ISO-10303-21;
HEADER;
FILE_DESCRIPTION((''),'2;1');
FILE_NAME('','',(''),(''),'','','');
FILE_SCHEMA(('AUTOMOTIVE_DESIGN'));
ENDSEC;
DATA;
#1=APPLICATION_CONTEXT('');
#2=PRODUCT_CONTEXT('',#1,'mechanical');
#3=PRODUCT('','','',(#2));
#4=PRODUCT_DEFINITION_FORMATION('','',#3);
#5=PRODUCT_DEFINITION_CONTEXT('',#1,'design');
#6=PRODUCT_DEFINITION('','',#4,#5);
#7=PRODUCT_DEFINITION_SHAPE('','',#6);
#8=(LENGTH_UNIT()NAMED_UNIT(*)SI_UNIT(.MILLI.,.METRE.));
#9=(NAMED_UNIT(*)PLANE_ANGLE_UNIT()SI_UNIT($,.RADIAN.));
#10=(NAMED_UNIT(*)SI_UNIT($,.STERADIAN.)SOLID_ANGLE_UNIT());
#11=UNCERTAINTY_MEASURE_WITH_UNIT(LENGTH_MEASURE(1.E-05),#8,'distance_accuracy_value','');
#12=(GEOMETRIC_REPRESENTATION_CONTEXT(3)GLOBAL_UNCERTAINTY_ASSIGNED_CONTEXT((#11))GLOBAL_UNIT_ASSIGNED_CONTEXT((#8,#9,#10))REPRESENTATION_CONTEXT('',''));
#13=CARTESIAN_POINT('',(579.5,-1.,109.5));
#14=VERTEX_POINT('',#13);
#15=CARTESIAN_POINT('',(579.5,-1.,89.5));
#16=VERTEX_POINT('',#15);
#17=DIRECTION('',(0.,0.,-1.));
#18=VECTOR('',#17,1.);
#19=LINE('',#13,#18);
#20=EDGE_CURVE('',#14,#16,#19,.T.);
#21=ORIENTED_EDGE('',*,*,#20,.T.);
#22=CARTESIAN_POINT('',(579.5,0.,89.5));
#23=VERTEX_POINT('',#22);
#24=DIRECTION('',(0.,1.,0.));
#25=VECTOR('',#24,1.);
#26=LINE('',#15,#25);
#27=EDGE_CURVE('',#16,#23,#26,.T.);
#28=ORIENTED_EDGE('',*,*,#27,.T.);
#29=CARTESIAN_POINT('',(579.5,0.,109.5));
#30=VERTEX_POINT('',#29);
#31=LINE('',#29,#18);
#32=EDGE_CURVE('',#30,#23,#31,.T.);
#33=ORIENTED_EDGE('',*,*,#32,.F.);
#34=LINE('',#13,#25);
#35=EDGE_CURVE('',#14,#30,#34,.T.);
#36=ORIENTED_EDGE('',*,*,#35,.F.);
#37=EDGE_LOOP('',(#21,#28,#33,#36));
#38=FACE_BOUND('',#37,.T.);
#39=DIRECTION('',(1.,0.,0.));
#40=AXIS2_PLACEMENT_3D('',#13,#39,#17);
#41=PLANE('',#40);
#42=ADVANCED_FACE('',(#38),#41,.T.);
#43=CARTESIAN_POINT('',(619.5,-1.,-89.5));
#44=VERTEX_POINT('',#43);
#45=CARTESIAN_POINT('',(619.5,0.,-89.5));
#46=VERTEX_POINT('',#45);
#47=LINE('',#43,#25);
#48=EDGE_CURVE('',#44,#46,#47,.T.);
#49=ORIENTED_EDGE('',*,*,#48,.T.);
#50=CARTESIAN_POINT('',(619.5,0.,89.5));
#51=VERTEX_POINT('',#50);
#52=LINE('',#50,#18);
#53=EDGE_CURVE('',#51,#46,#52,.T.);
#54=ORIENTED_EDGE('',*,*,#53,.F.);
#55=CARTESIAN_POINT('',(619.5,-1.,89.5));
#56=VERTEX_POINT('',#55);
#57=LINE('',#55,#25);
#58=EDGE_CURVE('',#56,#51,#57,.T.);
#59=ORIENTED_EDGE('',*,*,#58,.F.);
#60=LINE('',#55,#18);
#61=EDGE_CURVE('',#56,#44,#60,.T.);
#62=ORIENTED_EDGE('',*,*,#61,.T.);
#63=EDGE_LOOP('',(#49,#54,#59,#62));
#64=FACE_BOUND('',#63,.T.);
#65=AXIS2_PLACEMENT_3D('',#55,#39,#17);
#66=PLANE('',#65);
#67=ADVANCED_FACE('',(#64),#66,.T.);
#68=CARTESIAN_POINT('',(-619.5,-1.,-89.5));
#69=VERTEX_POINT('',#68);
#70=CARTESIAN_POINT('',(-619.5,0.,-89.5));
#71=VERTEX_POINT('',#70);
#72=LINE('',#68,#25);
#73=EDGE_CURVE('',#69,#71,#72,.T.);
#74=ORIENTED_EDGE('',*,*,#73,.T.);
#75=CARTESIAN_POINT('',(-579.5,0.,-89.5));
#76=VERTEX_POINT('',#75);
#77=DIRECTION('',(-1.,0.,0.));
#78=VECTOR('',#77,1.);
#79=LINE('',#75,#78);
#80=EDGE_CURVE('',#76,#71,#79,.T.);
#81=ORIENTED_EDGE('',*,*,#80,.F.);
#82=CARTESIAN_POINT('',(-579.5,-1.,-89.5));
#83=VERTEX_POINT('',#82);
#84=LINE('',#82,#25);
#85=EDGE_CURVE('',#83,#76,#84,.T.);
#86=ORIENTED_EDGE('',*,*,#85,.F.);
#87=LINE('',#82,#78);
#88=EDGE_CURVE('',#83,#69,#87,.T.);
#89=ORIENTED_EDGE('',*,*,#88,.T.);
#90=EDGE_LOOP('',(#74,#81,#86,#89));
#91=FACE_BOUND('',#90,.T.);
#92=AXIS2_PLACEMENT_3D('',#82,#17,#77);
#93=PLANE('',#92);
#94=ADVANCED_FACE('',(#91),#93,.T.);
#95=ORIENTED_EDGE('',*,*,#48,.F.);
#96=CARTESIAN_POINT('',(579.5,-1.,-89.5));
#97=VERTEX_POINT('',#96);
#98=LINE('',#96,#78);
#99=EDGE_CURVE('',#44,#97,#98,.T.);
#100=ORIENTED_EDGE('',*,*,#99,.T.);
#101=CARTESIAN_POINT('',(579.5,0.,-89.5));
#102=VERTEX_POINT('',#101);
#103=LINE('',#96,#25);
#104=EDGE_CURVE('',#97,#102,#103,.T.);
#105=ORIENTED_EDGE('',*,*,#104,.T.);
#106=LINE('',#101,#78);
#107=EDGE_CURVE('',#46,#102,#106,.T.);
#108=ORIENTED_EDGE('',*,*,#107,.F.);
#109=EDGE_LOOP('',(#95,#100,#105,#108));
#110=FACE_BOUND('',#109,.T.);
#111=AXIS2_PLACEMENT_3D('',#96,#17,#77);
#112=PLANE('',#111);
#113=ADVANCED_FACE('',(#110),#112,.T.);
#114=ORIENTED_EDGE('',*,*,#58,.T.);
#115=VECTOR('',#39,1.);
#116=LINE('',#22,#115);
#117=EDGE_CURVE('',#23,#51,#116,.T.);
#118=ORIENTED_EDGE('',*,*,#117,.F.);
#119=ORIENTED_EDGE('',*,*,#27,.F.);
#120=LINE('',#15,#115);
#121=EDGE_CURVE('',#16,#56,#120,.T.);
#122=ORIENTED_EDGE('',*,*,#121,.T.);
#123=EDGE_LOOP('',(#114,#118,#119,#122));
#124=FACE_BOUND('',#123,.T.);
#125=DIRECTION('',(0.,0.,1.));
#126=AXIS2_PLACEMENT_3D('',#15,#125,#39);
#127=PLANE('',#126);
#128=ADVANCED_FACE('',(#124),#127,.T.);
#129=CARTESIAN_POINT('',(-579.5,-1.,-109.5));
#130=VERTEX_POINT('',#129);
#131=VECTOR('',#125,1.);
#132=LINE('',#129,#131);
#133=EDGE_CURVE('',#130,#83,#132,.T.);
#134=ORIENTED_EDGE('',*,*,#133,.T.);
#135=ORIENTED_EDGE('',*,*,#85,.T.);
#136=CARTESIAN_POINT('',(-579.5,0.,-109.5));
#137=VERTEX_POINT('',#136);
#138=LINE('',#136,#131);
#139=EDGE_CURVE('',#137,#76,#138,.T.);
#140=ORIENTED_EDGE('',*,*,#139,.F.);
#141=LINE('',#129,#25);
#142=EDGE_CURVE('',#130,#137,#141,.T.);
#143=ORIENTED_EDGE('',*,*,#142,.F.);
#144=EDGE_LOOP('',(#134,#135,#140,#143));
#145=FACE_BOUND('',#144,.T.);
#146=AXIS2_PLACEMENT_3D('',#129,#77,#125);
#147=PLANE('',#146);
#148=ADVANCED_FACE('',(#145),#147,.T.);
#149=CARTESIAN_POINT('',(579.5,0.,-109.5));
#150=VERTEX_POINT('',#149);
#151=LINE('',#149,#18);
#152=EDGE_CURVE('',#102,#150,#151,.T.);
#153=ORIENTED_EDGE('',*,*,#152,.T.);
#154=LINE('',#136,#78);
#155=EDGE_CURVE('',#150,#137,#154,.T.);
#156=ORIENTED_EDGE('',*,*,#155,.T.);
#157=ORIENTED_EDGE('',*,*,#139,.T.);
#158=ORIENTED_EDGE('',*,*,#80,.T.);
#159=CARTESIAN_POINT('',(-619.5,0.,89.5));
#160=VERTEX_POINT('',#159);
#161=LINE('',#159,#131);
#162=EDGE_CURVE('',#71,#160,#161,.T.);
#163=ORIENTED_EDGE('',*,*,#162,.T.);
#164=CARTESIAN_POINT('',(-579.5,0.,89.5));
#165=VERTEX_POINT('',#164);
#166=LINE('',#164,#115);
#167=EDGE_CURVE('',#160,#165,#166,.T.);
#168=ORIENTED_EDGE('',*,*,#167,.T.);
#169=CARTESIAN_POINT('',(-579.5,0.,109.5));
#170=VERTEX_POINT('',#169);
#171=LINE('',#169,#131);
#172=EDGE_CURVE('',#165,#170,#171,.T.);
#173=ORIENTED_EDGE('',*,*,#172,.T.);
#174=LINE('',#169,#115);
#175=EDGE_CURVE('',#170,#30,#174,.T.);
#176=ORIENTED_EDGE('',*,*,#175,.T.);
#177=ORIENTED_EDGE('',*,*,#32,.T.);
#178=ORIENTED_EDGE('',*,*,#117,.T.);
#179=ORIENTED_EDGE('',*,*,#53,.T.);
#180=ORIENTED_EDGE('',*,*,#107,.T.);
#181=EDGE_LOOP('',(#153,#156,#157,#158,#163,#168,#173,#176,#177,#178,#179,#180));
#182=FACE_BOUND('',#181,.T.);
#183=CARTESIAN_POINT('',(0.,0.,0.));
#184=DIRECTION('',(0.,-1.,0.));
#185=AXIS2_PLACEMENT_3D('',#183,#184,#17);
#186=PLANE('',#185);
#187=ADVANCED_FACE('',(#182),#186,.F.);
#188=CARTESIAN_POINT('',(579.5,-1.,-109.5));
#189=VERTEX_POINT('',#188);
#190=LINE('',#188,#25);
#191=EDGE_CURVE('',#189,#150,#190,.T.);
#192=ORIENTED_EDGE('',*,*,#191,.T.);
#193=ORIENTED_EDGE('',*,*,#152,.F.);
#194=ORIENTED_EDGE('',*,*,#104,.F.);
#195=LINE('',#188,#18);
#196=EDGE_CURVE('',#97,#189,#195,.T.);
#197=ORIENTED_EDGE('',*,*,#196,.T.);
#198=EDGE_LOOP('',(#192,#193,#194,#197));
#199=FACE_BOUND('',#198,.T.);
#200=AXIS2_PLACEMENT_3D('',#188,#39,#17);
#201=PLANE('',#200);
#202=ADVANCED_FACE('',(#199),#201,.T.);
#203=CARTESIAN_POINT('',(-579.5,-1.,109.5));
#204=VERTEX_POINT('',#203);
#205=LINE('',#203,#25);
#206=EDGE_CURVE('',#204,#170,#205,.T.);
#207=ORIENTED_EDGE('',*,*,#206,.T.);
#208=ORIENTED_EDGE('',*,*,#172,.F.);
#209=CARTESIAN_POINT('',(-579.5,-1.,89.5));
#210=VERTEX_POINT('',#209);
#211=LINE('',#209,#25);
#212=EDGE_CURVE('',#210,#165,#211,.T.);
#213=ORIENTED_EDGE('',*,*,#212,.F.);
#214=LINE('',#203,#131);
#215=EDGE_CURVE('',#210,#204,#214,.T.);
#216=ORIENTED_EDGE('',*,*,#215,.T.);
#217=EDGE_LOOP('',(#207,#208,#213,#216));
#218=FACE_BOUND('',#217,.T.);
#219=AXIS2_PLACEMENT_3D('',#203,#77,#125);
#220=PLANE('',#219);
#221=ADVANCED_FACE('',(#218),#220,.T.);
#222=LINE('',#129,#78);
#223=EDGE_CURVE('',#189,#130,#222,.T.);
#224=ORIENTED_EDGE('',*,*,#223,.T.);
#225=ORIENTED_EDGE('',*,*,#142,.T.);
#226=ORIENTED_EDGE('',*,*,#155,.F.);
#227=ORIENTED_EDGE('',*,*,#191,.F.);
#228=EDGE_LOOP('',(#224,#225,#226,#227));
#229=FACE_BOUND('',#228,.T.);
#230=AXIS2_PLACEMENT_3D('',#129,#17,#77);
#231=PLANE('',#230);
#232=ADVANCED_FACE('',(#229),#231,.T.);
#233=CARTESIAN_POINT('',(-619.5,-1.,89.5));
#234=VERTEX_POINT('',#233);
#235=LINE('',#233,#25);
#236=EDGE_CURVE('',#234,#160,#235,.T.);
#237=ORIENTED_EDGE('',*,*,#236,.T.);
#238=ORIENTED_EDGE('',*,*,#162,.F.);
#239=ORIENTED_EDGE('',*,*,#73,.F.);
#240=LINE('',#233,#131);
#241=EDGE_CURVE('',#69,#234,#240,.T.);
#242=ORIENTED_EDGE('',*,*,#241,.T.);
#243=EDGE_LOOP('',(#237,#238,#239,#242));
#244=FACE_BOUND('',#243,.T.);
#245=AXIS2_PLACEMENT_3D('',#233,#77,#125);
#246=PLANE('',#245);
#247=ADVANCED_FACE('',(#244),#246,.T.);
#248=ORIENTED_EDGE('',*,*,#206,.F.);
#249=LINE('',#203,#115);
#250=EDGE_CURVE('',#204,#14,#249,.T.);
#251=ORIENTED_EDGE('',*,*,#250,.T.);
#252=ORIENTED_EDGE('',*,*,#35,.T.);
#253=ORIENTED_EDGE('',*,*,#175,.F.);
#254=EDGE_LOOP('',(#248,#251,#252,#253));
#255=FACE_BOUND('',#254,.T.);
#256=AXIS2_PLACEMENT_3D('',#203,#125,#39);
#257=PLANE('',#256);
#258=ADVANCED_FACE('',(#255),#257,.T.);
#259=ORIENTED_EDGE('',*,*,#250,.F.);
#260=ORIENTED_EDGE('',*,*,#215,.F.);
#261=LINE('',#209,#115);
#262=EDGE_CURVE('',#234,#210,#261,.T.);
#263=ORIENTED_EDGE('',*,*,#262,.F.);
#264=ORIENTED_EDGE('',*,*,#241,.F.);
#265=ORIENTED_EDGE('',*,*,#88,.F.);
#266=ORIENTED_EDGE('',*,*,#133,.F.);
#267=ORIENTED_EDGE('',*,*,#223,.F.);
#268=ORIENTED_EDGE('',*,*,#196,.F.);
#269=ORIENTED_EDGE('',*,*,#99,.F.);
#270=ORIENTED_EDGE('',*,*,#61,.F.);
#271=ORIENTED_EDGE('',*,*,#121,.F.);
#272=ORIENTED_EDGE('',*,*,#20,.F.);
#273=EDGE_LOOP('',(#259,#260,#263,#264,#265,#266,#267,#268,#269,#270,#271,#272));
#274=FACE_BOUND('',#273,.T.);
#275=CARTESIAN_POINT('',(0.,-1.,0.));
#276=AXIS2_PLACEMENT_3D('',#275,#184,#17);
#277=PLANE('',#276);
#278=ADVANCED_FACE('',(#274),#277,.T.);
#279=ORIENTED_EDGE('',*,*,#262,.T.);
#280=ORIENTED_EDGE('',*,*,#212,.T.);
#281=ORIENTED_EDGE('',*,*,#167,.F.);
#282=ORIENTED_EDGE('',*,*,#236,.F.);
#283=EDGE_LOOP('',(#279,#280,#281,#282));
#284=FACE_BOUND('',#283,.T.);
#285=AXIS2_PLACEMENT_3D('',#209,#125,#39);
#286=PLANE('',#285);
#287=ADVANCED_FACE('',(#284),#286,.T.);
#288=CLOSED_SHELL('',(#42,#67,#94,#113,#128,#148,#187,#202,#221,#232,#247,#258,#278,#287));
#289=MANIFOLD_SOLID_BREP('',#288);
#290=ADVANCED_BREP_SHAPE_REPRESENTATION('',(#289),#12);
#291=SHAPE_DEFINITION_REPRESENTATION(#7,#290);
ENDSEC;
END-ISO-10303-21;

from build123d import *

# Parameters (mm, degrees)
BASE_FLANGE1_DEPTH = 1


# Sheet-metal steps are written as plain solids
with BuildPart() as part:
    # Sketch1 → Base-Flange1 (new body)
    with BuildSketch(Plane(origin=(0, 0, 0), x_dir=(1, 0, 0), z_dir=(0, 1, 0))):
        Polygon((579.5, 109.5), (579.5, 89.5), (619.5, 89.5), (619.5, -89.5), (579.5, -89.5), (579.5, -109.5), (-579.5, -109.5), (-579.5, -89.5), (-619.5, -89.5), (-619.5, 89.5), (-579.5, 89.5), (-579.5, 109.5), align=None)
    extrude(amount=-BASE_FLANGE1_DEPTH)


solid = part.part
